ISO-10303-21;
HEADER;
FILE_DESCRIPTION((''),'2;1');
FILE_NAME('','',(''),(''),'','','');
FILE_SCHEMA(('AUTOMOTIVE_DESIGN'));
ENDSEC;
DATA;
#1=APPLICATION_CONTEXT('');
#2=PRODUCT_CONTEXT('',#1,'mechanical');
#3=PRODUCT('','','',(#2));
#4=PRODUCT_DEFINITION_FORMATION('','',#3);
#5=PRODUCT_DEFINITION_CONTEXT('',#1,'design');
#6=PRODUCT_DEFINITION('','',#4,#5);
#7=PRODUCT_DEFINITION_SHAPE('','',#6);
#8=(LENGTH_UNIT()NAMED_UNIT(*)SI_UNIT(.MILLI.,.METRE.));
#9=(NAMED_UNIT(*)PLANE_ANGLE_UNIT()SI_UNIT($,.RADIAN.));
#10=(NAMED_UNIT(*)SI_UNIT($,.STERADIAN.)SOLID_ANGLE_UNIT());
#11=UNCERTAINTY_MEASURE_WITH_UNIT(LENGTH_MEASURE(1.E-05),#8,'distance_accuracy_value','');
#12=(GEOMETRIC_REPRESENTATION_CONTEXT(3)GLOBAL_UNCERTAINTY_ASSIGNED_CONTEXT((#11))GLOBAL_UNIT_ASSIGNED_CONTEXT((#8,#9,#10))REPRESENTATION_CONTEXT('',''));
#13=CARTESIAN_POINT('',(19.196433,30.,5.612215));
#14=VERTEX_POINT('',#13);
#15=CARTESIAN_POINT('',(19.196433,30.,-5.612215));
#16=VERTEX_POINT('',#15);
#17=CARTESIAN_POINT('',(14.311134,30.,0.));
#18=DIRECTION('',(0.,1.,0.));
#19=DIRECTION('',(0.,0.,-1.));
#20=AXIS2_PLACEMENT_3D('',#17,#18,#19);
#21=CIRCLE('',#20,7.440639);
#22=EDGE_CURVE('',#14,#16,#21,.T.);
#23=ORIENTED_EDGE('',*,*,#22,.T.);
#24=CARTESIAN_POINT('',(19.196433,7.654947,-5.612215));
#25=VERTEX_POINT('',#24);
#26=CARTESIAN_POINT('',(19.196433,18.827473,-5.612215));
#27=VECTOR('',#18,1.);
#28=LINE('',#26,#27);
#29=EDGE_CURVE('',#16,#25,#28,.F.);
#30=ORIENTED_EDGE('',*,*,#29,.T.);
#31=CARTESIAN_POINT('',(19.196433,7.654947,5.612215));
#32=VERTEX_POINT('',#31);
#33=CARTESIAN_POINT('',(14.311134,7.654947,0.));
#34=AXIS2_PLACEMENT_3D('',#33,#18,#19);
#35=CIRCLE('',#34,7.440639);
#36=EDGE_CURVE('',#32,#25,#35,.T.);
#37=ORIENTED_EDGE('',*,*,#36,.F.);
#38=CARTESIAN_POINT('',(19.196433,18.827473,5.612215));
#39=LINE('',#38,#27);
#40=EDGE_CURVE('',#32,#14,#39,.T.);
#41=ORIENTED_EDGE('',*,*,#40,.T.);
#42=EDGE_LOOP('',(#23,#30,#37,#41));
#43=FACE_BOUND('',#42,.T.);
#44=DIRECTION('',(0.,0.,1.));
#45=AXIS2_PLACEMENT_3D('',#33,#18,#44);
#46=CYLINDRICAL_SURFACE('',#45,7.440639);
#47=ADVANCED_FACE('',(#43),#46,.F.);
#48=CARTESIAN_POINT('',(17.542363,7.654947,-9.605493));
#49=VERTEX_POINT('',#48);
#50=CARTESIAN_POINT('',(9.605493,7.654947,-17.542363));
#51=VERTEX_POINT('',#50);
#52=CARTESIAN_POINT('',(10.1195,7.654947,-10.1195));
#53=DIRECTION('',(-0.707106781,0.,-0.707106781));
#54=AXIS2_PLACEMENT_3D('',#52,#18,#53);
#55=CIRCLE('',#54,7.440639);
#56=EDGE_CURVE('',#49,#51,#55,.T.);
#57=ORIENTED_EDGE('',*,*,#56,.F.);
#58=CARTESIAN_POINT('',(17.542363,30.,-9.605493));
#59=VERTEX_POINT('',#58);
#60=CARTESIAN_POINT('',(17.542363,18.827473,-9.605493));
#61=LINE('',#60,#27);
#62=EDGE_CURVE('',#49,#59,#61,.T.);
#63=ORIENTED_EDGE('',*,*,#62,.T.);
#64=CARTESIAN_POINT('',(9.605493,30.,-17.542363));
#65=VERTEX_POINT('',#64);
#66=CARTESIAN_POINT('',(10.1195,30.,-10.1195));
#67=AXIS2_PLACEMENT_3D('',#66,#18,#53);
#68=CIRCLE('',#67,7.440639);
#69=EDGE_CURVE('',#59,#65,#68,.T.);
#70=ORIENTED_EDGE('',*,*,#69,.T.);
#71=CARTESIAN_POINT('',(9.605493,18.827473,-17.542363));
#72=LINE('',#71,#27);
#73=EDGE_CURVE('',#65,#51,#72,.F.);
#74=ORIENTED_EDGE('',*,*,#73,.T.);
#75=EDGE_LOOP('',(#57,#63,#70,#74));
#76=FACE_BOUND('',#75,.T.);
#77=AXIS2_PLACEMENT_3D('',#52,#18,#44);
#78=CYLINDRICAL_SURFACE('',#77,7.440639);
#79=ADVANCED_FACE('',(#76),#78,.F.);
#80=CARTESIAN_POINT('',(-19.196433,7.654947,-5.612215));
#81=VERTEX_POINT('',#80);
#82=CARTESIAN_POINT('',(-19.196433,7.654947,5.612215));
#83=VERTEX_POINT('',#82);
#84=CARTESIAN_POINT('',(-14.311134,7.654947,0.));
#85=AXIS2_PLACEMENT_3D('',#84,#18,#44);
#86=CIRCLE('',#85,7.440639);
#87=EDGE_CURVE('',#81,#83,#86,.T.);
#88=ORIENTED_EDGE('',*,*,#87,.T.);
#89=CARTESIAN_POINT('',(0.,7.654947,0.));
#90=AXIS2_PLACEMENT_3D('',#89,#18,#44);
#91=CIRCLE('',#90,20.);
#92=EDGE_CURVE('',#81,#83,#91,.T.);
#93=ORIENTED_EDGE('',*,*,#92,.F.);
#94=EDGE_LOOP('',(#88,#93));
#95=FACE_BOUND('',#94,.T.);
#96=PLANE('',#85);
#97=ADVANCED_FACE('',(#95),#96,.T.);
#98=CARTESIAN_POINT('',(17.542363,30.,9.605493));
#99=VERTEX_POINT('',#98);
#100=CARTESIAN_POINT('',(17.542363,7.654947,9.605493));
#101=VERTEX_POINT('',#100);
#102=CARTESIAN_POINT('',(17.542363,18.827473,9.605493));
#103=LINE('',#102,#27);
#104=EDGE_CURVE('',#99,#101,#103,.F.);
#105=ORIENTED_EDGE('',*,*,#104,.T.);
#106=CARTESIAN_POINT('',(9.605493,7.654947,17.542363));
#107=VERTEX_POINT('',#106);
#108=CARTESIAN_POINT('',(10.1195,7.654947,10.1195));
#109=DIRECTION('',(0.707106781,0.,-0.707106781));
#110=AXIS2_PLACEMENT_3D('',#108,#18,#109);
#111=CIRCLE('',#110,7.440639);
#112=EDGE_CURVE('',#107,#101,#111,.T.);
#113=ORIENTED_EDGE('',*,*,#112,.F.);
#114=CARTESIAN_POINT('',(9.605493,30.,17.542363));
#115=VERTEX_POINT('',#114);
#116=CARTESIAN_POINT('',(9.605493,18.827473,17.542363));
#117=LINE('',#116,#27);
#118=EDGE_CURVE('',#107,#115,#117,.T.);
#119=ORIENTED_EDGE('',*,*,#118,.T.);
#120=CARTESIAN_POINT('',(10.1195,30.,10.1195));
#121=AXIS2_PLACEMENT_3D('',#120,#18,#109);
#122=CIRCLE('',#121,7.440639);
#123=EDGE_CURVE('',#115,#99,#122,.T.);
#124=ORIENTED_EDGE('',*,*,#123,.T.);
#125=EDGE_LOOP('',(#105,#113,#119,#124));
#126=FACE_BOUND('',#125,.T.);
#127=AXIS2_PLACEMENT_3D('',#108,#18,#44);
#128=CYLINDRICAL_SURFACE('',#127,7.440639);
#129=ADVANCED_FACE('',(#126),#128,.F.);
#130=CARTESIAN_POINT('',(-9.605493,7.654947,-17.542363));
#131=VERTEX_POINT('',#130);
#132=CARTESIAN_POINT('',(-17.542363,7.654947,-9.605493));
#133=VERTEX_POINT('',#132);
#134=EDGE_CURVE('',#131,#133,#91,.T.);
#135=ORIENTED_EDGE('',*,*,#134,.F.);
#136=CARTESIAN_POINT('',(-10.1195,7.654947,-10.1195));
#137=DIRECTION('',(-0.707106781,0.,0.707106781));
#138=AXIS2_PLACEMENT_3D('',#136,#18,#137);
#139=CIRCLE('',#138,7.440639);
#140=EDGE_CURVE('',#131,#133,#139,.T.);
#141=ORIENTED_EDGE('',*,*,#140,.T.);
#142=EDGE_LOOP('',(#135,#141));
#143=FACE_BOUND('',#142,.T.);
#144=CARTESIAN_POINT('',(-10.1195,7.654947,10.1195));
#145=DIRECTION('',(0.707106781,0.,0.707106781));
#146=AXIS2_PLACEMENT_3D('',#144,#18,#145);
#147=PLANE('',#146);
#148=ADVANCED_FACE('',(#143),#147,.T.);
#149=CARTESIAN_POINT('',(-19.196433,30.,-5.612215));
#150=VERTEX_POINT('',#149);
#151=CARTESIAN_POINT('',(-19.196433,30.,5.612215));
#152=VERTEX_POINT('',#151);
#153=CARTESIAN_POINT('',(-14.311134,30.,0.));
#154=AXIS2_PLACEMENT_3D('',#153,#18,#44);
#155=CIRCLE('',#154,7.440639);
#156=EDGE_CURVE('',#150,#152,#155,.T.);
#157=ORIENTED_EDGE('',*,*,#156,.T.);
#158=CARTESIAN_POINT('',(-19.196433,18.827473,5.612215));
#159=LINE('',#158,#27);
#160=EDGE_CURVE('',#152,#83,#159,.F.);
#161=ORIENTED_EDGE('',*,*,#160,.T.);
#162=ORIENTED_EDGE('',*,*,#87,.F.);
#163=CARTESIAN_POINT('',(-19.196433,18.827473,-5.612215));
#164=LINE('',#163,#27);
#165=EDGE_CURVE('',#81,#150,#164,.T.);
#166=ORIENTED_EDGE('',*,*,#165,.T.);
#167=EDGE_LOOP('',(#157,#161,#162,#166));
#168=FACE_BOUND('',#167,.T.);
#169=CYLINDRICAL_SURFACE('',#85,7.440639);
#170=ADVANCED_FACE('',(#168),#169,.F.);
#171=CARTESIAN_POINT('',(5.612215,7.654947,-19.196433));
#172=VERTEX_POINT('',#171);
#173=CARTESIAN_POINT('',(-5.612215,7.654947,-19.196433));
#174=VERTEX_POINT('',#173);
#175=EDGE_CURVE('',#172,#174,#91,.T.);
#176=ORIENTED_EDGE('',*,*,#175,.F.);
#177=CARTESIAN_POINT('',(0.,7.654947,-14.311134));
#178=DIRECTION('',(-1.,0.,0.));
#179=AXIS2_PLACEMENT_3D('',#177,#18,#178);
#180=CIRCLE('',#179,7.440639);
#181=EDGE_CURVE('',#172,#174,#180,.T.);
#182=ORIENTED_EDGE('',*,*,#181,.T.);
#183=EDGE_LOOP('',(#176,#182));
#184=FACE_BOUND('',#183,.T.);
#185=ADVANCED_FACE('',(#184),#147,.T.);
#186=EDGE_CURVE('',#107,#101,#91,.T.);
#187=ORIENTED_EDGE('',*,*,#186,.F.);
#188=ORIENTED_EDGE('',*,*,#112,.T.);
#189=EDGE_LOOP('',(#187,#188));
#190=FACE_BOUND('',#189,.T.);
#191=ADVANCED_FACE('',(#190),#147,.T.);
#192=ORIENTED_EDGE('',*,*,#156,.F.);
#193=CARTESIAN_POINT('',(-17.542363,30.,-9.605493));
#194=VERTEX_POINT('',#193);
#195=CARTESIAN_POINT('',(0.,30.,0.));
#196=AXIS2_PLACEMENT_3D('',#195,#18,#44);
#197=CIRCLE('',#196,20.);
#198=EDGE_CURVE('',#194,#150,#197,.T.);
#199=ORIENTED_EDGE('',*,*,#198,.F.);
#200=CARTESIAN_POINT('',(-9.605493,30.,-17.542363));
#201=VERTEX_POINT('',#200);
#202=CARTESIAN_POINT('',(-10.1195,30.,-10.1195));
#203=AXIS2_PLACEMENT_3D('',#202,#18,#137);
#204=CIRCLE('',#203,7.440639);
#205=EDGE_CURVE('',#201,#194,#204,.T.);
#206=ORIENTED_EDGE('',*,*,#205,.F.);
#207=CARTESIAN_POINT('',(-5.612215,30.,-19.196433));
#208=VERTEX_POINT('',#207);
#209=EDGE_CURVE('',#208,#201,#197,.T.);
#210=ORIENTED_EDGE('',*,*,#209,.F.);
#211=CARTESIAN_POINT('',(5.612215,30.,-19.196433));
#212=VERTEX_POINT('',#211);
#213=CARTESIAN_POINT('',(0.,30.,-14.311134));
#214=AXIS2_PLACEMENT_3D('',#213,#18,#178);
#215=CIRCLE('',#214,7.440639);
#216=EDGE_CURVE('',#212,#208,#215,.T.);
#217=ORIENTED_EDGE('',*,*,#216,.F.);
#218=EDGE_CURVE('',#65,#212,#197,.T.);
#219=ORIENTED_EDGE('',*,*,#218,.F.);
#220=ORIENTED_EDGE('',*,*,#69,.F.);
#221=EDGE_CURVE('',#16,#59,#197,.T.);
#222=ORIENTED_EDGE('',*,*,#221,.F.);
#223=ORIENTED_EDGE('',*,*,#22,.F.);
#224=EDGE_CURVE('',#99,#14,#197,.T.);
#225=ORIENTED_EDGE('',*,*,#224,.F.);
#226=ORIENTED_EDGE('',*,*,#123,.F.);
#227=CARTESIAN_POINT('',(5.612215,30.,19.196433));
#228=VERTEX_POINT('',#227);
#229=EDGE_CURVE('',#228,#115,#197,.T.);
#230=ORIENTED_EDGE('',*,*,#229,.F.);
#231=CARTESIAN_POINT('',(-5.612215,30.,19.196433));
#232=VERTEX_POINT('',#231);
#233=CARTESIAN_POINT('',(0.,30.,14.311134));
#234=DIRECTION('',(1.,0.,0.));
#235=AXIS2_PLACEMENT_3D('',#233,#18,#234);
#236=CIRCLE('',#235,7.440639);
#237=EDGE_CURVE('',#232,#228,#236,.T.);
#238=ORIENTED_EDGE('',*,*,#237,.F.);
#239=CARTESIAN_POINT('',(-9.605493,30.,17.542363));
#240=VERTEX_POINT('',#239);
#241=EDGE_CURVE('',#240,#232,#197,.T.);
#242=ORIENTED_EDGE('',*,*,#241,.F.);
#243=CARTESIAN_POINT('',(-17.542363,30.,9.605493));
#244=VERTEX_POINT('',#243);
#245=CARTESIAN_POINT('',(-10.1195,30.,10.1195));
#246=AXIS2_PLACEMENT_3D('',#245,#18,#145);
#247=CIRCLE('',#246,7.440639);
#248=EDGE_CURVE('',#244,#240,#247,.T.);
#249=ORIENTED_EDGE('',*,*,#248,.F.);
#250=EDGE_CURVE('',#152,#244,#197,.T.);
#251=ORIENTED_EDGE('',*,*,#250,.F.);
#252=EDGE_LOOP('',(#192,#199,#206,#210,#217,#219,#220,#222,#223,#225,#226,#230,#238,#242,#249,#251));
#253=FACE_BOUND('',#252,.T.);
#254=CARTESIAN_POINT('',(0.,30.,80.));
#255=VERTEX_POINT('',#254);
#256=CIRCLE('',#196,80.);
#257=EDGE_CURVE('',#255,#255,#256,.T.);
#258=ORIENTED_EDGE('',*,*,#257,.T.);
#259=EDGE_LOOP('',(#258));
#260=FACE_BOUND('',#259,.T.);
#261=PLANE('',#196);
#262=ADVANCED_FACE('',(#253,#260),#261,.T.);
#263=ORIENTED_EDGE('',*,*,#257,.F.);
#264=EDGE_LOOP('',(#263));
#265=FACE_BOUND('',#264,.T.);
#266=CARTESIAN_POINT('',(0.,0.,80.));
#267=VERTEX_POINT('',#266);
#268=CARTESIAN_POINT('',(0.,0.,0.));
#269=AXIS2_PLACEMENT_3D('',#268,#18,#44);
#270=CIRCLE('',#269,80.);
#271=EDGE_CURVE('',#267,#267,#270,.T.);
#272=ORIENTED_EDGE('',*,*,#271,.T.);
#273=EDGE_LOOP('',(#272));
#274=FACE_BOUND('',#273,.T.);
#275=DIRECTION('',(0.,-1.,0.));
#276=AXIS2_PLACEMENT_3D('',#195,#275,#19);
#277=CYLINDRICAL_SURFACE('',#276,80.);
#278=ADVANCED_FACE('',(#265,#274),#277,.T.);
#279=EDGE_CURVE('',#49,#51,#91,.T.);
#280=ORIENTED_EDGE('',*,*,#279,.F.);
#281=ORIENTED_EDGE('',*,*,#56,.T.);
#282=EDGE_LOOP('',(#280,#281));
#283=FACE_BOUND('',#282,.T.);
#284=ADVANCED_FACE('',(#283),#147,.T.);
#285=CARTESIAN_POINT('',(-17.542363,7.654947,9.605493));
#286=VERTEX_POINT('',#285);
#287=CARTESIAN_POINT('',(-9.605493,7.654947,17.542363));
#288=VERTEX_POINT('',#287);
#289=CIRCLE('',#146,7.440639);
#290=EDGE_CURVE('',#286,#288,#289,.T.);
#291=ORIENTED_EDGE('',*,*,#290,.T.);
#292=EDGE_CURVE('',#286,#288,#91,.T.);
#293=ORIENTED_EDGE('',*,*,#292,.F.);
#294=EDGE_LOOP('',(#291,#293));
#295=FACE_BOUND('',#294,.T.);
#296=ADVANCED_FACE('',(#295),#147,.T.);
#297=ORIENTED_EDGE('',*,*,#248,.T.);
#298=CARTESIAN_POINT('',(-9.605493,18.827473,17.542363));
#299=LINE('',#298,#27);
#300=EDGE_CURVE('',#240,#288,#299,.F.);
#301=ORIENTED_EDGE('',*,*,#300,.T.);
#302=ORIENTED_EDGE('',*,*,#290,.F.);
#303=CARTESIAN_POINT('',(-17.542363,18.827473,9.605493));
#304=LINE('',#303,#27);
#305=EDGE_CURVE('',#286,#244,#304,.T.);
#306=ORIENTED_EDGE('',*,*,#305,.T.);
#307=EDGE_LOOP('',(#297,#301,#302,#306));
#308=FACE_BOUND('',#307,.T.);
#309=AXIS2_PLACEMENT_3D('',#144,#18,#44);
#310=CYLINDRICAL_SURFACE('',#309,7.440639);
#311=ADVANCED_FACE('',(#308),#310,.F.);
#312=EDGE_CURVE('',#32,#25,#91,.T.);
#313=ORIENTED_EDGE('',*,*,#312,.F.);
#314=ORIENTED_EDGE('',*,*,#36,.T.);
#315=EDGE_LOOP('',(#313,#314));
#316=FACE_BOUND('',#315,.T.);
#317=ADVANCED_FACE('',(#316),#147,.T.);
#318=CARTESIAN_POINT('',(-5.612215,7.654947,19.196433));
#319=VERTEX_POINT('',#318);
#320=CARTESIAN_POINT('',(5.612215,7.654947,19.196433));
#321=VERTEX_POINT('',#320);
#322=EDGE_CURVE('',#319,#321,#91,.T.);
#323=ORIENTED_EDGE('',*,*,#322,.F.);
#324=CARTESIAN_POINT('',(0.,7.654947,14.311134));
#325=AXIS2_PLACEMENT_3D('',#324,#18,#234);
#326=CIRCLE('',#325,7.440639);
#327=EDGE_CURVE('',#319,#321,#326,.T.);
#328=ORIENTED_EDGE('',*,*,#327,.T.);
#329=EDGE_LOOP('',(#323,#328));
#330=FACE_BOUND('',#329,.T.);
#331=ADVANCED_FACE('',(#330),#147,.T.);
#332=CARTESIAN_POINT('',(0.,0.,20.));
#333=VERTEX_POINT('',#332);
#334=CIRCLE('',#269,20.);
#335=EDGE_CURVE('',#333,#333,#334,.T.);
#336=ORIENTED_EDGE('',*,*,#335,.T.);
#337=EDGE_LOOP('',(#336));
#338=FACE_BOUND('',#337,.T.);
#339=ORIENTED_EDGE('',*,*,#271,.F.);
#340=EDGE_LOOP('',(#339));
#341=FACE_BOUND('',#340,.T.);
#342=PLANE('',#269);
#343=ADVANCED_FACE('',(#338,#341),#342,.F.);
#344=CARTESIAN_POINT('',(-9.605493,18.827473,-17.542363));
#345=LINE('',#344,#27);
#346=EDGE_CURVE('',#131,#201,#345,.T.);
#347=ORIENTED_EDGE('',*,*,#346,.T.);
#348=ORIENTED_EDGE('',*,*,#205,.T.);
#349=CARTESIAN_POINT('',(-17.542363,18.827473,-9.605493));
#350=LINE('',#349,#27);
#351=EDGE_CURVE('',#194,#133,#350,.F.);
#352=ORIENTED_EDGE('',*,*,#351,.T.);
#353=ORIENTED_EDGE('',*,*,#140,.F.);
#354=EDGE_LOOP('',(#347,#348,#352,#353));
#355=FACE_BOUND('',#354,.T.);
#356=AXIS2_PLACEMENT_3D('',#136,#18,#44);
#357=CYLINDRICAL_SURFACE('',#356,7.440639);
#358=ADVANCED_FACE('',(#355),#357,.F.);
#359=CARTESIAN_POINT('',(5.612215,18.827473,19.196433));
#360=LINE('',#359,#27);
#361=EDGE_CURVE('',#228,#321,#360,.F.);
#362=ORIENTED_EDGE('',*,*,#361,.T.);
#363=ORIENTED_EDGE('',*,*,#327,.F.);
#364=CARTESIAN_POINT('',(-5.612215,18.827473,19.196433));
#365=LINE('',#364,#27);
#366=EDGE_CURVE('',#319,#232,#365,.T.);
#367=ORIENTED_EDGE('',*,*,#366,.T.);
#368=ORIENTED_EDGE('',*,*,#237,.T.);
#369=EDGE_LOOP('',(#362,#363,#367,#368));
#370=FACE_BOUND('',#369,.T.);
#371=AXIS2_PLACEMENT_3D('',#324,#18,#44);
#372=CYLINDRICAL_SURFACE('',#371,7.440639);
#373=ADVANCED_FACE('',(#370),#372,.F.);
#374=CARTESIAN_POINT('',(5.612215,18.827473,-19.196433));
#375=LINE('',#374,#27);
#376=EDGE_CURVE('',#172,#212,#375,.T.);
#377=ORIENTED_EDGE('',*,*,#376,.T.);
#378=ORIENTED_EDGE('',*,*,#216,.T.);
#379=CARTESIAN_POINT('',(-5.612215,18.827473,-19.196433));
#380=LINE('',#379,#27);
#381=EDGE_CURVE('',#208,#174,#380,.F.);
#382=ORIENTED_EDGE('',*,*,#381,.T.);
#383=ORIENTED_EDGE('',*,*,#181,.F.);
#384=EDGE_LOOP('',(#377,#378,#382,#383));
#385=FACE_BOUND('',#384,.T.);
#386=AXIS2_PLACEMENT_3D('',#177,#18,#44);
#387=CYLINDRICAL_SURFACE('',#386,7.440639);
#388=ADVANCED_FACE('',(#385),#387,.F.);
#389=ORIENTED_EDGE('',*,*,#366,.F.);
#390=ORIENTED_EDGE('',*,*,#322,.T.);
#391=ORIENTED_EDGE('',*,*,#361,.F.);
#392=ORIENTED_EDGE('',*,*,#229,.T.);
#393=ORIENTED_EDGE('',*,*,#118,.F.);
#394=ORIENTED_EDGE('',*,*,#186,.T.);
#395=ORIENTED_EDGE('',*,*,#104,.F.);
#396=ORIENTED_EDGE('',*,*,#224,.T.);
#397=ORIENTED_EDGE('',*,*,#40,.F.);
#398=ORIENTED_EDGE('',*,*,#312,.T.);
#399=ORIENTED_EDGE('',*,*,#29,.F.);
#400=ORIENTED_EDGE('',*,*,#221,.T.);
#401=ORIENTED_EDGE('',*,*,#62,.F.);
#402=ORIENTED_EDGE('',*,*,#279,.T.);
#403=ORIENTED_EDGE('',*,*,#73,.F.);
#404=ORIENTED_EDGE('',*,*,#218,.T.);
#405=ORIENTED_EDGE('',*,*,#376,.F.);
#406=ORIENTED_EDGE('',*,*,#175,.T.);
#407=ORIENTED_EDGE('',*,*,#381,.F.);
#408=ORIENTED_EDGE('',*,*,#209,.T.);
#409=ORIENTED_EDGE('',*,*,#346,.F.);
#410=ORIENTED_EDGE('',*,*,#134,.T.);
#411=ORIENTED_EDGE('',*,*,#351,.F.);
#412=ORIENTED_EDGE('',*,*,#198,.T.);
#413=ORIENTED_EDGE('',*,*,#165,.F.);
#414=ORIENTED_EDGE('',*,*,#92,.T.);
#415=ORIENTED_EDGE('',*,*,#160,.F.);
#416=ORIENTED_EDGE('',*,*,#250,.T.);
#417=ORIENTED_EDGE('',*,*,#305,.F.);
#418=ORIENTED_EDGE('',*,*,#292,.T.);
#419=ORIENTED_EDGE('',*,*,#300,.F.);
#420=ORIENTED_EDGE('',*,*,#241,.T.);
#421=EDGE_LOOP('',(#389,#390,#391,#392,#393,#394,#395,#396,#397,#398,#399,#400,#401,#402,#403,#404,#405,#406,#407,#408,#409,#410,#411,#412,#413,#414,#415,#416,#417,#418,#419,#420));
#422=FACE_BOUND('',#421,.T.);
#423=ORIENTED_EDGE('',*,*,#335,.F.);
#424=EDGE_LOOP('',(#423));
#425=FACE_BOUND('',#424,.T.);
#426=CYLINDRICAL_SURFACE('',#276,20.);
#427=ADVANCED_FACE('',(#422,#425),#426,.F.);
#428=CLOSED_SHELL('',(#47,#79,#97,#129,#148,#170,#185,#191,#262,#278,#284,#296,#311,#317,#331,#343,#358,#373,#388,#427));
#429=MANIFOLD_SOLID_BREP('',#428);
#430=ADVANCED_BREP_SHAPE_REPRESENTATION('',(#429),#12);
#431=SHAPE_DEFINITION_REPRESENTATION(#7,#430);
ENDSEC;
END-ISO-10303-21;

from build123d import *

# Parameters (mm, degrees)
SKETCH1_R           = 80
BOSS_EXTRUDE1_DEPTH = 30
SKETCH2_R           = 20
CUT_EXTRUDE1_DEPTH  = 118.046999107
SKETCH3_R           = 7.440638603
CUT_EXTRUDE2_DEPTH  = 22.345053117
CIRPATTERN1_COUNT   = 8


with BuildPart() as part:
    # Sketch1 → Boss-Extrude1 (new body)
    with BuildSketch(Plane(origin=(0, 0, 0), x_dir=(1, 0, 0), z_dir=(0, 1, 0))):
        Circle(SKETCH1_R)
    extrude(amount=BOSS_EXTRUDE1_DEPTH)

    # Sketch2 → Cut-Extrude1 (cut, through all)
    with BuildSketch(Plane(origin=(0, 0, 0), x_dir=(1, 0, 0), z_dir=(0, 1, 0))):
        Circle(SKETCH2_R)
    extrude(amount=CUT_EXTRUDE1_DEPTH, mode=Mode.SUBTRACT)

    # Sketch3 → Cut-Extrude2 (cut)
    with BuildSketch(Plane(origin=(0, 30, 0), x_dir=(1, 0, 0), z_dir=(0, 1, 0))):
        with Locations((-14.311133997, 0)):
            Circle(SKETCH3_R)
    cut_extrude2 = extrude(amount=-CUT_EXTRUDE2_DEPTH, mode=Mode.SUBTRACT)

    # CirPattern1: Cut-Extrude2 ×8 about axis
    cirpattern1_axis = Axis((0, 0, 0), (0, 1, 0))
    for i in range(1, CIRPATTERN1_COUNT):
        add(cut_extrude2.rotate(cirpattern1_axis, i * 360 / CIRPATTERN1_COUNT), mode=Mode.SUBTRACT)


solid = part.part
